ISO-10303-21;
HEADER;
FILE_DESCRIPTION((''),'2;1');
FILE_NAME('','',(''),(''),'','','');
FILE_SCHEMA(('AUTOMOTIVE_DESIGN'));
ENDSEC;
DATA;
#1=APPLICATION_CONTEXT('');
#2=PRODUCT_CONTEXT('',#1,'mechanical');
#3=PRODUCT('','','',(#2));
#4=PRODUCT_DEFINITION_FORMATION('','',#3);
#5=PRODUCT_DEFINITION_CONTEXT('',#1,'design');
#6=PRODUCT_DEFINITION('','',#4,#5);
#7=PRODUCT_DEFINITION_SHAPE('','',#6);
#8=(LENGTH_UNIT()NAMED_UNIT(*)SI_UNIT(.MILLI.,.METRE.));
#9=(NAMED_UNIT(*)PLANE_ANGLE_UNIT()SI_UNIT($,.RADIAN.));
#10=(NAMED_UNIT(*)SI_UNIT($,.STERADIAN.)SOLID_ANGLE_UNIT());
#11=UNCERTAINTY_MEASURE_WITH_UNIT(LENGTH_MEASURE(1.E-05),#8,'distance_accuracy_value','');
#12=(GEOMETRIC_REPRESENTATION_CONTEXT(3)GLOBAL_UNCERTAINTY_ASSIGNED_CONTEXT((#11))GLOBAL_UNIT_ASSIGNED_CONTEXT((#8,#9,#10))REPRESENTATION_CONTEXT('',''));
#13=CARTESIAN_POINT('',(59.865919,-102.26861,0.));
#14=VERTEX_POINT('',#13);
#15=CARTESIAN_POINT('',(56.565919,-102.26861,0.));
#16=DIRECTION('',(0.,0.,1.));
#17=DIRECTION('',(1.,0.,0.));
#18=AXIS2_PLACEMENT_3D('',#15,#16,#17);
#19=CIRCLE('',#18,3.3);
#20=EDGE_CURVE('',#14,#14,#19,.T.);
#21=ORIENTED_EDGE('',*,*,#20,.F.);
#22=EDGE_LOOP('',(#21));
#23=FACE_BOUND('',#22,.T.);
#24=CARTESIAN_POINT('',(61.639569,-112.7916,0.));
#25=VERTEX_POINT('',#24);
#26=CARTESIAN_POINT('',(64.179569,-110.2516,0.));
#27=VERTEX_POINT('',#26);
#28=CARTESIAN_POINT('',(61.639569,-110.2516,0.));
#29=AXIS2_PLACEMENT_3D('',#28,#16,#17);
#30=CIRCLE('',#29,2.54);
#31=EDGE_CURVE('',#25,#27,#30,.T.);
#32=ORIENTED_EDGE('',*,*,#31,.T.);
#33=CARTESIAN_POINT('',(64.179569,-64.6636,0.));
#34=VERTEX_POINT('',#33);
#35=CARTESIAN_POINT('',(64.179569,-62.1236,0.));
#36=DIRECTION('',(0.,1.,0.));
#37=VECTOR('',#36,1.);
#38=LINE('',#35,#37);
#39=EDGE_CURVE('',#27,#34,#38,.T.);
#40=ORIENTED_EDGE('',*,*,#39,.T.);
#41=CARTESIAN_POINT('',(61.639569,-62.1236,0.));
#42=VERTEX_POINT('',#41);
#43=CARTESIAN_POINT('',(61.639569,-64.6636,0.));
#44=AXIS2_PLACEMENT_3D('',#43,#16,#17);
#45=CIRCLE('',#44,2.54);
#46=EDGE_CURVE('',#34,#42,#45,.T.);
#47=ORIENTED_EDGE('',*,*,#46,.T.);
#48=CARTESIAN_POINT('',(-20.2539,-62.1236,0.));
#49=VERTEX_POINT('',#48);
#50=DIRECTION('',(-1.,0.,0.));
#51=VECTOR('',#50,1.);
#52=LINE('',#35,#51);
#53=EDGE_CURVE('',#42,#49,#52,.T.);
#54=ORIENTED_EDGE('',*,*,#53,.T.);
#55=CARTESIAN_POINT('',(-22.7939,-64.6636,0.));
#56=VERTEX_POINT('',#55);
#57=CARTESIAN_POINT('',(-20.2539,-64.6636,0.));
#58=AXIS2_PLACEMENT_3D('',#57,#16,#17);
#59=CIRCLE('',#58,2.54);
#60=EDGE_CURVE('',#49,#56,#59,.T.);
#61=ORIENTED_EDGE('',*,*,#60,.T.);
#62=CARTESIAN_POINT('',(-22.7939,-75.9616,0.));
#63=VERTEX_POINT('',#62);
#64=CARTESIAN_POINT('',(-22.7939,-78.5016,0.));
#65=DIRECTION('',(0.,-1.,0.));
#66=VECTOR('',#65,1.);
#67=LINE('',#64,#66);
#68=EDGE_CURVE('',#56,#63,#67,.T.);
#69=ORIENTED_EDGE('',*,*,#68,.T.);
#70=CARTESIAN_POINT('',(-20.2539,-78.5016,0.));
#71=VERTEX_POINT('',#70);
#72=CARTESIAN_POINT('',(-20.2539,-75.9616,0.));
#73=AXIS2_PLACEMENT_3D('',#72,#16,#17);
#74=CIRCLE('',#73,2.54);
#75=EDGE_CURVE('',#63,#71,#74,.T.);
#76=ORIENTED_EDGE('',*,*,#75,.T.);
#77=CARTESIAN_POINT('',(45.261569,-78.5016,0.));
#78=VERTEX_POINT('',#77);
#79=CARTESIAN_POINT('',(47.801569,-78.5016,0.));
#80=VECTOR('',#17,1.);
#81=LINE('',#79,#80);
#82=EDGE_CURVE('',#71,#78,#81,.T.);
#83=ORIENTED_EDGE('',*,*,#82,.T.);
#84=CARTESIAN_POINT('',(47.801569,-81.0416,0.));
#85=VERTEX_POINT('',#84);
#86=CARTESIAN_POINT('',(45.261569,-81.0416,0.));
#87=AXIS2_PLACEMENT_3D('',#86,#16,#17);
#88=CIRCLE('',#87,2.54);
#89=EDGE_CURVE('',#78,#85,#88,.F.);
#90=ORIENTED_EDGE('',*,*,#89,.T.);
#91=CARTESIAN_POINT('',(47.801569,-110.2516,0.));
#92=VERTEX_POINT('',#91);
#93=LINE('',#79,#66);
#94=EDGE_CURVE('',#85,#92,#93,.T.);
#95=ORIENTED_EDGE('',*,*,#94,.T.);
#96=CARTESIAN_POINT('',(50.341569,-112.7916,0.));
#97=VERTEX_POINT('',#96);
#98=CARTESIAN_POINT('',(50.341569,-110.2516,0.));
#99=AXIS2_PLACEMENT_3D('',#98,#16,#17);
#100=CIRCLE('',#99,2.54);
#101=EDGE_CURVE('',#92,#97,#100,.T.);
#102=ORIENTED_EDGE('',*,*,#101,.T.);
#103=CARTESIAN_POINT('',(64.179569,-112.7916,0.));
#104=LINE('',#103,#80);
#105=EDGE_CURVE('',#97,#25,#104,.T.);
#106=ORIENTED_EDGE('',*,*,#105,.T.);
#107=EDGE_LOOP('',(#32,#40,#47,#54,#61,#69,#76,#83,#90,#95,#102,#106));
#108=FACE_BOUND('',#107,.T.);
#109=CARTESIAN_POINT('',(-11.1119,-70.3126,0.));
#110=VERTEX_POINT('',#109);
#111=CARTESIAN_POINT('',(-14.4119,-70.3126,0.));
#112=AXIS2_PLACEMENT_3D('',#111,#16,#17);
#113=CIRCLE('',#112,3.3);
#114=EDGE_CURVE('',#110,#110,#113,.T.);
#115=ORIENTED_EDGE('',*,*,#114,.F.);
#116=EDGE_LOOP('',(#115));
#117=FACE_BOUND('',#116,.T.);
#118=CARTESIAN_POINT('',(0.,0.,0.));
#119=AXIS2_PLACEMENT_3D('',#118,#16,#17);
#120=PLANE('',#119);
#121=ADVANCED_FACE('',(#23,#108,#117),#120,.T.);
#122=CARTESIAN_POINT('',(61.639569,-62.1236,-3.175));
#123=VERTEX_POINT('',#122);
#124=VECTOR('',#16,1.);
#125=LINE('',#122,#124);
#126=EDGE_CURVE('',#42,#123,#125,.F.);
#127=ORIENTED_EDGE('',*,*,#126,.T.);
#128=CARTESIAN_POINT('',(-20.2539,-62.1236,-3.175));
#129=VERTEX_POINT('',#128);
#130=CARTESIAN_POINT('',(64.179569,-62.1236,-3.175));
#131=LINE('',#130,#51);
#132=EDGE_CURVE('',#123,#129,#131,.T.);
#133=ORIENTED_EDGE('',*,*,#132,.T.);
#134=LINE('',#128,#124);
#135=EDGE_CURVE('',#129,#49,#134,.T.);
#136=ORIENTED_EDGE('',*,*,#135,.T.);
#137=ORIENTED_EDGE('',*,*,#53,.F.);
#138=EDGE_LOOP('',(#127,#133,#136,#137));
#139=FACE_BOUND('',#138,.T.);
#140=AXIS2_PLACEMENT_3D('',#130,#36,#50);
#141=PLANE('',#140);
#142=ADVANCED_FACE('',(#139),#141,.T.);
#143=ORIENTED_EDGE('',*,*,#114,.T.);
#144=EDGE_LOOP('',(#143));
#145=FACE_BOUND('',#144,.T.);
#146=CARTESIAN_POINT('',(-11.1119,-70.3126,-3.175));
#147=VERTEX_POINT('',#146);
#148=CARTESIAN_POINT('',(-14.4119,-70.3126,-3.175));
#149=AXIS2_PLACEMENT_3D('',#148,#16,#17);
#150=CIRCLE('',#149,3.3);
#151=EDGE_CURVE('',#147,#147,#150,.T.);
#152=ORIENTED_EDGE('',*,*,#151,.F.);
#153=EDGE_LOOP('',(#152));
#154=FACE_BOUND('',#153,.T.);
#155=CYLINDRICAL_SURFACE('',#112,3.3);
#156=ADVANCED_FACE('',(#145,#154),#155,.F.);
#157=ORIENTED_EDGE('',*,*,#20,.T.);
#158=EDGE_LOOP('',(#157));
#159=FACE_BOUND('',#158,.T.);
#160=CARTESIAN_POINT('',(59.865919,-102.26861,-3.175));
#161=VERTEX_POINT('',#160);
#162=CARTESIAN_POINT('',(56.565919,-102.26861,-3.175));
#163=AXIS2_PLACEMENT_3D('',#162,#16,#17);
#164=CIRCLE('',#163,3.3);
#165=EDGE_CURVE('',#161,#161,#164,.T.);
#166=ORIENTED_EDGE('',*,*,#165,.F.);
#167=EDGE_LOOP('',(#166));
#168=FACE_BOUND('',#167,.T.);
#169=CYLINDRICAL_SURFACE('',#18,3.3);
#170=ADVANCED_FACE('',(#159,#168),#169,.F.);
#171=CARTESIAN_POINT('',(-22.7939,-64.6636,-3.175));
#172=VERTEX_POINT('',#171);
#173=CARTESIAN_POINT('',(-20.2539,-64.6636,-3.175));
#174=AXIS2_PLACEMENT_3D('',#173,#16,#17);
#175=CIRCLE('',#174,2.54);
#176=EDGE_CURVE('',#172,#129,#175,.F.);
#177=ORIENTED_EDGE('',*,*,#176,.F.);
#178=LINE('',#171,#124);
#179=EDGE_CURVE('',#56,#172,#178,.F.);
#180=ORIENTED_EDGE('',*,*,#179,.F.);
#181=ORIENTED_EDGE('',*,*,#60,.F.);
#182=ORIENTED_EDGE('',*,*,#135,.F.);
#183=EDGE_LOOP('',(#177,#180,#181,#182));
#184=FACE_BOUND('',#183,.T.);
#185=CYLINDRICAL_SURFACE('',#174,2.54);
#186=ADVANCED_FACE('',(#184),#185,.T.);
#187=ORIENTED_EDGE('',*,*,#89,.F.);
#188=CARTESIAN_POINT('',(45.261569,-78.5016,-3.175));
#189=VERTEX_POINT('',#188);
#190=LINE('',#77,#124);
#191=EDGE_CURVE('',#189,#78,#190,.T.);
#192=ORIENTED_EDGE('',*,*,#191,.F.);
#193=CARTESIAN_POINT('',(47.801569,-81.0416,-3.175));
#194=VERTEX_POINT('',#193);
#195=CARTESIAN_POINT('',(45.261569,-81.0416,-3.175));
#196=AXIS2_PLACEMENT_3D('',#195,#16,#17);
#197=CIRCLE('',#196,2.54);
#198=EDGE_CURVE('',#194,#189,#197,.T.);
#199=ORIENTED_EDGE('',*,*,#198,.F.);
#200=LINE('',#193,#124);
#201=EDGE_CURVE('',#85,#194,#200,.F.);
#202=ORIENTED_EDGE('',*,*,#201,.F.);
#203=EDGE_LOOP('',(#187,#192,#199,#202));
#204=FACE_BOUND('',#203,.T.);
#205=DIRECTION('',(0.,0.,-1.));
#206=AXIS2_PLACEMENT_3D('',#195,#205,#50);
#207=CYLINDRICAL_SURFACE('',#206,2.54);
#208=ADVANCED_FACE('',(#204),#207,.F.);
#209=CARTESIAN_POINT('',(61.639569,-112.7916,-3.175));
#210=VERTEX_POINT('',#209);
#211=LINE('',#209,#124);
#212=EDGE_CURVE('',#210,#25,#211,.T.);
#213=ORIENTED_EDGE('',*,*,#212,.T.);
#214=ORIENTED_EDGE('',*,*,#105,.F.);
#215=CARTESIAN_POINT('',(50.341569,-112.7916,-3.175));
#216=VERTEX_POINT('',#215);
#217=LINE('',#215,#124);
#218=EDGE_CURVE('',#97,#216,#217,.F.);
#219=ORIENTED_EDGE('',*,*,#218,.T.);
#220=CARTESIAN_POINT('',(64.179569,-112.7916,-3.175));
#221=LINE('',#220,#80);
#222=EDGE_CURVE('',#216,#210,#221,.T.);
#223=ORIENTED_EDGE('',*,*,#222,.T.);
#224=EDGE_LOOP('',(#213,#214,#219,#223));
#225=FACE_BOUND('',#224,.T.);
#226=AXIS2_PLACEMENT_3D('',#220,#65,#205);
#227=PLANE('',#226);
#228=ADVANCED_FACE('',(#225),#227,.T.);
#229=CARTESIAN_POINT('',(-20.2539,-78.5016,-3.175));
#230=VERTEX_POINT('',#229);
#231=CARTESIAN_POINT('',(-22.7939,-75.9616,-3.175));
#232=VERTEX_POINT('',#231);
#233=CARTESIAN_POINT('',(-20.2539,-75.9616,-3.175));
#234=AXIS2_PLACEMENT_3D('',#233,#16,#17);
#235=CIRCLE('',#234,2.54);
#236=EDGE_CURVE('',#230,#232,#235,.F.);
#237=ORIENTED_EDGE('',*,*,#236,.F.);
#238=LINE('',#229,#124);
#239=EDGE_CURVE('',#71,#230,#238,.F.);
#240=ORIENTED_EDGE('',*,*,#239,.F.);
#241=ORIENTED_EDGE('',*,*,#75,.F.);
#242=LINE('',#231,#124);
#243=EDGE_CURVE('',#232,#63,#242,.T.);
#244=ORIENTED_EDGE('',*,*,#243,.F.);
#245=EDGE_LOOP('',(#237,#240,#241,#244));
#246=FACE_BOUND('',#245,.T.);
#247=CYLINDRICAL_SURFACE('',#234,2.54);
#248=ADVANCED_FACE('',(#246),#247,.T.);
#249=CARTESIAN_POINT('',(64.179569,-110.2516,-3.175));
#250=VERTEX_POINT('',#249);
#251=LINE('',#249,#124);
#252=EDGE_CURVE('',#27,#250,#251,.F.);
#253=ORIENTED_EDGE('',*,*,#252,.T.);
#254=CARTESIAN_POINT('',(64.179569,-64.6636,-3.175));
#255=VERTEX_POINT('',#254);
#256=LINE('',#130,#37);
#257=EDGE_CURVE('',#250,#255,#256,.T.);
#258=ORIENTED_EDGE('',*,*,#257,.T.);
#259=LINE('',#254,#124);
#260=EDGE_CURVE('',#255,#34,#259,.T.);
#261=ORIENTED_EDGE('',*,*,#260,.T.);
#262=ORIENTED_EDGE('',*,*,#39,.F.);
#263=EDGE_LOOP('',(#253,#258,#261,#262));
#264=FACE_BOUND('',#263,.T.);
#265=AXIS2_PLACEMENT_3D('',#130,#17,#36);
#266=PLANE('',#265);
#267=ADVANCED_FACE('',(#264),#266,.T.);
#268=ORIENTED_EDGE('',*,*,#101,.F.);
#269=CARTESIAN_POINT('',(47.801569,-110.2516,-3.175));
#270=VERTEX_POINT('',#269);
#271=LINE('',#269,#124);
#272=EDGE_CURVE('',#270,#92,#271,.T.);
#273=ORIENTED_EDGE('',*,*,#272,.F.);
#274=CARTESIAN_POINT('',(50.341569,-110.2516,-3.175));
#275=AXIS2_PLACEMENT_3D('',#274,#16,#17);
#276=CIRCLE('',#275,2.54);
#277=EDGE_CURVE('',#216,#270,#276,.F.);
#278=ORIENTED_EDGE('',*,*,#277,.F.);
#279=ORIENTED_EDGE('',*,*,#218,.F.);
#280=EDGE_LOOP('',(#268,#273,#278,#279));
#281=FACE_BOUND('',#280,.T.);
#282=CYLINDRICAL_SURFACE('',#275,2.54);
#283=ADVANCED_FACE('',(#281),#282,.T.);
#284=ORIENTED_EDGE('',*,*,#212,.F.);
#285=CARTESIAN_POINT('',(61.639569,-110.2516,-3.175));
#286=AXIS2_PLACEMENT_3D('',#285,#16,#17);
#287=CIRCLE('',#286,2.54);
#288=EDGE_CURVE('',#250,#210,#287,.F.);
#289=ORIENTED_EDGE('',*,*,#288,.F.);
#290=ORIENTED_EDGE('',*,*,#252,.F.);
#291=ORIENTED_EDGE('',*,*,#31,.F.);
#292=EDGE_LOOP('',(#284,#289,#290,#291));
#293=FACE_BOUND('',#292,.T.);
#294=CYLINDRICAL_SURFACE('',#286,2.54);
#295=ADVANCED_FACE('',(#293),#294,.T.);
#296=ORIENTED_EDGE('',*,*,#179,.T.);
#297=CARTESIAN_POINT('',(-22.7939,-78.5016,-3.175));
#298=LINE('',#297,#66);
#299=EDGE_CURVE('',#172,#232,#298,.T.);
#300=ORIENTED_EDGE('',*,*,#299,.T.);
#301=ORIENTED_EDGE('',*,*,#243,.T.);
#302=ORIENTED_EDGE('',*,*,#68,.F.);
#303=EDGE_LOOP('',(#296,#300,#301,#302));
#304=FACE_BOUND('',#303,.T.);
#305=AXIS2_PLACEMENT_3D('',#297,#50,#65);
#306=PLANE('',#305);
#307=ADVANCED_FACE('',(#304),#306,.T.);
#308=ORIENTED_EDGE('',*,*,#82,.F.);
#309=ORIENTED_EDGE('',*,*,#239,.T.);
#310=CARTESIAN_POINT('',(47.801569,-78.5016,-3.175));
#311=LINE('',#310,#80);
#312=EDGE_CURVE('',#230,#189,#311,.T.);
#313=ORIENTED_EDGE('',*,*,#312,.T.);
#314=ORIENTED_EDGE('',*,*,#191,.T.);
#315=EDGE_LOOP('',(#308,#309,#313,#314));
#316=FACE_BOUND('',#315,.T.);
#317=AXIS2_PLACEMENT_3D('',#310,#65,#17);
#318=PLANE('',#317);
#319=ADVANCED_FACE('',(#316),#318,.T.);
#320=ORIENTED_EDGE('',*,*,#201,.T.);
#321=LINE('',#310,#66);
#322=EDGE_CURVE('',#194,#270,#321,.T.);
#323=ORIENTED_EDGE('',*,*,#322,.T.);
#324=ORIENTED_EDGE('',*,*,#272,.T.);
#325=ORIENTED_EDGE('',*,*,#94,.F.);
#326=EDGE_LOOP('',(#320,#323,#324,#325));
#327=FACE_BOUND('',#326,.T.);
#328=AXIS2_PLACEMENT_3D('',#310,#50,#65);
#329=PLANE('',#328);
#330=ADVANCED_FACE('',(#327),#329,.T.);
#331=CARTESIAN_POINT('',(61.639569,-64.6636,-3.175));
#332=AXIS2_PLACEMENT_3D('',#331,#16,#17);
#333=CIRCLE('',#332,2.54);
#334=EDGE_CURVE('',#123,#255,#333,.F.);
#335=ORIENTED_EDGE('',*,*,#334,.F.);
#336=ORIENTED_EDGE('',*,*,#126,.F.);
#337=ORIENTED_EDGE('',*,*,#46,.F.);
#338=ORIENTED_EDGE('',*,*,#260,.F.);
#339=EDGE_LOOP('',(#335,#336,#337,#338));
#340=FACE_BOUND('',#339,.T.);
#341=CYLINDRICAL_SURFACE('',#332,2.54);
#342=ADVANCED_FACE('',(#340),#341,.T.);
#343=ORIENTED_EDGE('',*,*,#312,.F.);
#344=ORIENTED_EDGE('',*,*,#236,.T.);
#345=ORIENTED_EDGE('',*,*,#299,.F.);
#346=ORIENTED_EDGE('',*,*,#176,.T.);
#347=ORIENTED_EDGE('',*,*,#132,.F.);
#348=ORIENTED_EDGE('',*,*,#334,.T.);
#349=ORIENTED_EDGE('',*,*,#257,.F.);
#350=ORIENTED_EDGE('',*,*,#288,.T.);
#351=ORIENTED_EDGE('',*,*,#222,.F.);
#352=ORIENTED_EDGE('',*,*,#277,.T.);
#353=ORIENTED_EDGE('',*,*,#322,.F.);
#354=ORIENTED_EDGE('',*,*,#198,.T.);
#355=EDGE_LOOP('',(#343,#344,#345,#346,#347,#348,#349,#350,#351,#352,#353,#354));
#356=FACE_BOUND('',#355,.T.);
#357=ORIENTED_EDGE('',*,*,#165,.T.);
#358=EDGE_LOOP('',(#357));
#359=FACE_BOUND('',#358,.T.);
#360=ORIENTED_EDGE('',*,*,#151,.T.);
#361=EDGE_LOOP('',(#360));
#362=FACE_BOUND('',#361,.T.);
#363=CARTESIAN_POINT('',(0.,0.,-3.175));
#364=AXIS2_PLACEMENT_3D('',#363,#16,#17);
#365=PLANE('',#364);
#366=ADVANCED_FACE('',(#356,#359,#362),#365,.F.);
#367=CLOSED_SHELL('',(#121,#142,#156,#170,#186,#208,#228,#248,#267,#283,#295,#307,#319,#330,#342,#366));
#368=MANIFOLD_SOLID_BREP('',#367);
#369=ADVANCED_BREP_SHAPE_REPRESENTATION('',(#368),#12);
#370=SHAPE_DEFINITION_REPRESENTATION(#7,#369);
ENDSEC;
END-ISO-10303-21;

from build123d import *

# Parameters (mm, degrees)
BASE_FLANGE1_DEPTH   = 3.175
M6_CLEARANCE_HOLE1_D = 6.6
FILLET1_R            = 2.54


# Sheet-metal steps are written as plain solids
with BuildPart() as part:
    # Sketch1 → Base-Flange1 (new body)
    with BuildSketch(Plane.XY):
        Polygon((47.801569048, -78.501600001), (-22.7939, -78.501600001), (-22.7939, -62.123600001), (64.179569048, -62.123600001), (64.179569048, -112.791600001), (47.801569048, -112.791600001), align=None)
    extrude(amount=-BASE_FLANGE1_DEPTH)

    # M6 Clearance Hole1 (through all)
    with Locations(Plane.XY):
        with Locations((56.565919048, -102.268610498), (-14.4119, -70.312600001)):
            Hole(M6_CLEARANCE_HOLE1_D / 2)

    # Fillet1
    fillet1_edges = [part.edges().sort_by_distance(p)[0] for p in [
        (-22.7939, -62.123600001, -1.5875),
        (64.179569048, -62.123600001, -1.5875),
        (64.179569048, -112.791600001, -1.5875),
        (47.801569048, -112.791600001, -1.5875),
        (47.801569048, -78.501600001, -1.5875),
        (-22.7939, -78.501600001, -1.5875),
    ]]
    fillet(fillet1_edges, radius=FILLET1_R)


solid = part.part
